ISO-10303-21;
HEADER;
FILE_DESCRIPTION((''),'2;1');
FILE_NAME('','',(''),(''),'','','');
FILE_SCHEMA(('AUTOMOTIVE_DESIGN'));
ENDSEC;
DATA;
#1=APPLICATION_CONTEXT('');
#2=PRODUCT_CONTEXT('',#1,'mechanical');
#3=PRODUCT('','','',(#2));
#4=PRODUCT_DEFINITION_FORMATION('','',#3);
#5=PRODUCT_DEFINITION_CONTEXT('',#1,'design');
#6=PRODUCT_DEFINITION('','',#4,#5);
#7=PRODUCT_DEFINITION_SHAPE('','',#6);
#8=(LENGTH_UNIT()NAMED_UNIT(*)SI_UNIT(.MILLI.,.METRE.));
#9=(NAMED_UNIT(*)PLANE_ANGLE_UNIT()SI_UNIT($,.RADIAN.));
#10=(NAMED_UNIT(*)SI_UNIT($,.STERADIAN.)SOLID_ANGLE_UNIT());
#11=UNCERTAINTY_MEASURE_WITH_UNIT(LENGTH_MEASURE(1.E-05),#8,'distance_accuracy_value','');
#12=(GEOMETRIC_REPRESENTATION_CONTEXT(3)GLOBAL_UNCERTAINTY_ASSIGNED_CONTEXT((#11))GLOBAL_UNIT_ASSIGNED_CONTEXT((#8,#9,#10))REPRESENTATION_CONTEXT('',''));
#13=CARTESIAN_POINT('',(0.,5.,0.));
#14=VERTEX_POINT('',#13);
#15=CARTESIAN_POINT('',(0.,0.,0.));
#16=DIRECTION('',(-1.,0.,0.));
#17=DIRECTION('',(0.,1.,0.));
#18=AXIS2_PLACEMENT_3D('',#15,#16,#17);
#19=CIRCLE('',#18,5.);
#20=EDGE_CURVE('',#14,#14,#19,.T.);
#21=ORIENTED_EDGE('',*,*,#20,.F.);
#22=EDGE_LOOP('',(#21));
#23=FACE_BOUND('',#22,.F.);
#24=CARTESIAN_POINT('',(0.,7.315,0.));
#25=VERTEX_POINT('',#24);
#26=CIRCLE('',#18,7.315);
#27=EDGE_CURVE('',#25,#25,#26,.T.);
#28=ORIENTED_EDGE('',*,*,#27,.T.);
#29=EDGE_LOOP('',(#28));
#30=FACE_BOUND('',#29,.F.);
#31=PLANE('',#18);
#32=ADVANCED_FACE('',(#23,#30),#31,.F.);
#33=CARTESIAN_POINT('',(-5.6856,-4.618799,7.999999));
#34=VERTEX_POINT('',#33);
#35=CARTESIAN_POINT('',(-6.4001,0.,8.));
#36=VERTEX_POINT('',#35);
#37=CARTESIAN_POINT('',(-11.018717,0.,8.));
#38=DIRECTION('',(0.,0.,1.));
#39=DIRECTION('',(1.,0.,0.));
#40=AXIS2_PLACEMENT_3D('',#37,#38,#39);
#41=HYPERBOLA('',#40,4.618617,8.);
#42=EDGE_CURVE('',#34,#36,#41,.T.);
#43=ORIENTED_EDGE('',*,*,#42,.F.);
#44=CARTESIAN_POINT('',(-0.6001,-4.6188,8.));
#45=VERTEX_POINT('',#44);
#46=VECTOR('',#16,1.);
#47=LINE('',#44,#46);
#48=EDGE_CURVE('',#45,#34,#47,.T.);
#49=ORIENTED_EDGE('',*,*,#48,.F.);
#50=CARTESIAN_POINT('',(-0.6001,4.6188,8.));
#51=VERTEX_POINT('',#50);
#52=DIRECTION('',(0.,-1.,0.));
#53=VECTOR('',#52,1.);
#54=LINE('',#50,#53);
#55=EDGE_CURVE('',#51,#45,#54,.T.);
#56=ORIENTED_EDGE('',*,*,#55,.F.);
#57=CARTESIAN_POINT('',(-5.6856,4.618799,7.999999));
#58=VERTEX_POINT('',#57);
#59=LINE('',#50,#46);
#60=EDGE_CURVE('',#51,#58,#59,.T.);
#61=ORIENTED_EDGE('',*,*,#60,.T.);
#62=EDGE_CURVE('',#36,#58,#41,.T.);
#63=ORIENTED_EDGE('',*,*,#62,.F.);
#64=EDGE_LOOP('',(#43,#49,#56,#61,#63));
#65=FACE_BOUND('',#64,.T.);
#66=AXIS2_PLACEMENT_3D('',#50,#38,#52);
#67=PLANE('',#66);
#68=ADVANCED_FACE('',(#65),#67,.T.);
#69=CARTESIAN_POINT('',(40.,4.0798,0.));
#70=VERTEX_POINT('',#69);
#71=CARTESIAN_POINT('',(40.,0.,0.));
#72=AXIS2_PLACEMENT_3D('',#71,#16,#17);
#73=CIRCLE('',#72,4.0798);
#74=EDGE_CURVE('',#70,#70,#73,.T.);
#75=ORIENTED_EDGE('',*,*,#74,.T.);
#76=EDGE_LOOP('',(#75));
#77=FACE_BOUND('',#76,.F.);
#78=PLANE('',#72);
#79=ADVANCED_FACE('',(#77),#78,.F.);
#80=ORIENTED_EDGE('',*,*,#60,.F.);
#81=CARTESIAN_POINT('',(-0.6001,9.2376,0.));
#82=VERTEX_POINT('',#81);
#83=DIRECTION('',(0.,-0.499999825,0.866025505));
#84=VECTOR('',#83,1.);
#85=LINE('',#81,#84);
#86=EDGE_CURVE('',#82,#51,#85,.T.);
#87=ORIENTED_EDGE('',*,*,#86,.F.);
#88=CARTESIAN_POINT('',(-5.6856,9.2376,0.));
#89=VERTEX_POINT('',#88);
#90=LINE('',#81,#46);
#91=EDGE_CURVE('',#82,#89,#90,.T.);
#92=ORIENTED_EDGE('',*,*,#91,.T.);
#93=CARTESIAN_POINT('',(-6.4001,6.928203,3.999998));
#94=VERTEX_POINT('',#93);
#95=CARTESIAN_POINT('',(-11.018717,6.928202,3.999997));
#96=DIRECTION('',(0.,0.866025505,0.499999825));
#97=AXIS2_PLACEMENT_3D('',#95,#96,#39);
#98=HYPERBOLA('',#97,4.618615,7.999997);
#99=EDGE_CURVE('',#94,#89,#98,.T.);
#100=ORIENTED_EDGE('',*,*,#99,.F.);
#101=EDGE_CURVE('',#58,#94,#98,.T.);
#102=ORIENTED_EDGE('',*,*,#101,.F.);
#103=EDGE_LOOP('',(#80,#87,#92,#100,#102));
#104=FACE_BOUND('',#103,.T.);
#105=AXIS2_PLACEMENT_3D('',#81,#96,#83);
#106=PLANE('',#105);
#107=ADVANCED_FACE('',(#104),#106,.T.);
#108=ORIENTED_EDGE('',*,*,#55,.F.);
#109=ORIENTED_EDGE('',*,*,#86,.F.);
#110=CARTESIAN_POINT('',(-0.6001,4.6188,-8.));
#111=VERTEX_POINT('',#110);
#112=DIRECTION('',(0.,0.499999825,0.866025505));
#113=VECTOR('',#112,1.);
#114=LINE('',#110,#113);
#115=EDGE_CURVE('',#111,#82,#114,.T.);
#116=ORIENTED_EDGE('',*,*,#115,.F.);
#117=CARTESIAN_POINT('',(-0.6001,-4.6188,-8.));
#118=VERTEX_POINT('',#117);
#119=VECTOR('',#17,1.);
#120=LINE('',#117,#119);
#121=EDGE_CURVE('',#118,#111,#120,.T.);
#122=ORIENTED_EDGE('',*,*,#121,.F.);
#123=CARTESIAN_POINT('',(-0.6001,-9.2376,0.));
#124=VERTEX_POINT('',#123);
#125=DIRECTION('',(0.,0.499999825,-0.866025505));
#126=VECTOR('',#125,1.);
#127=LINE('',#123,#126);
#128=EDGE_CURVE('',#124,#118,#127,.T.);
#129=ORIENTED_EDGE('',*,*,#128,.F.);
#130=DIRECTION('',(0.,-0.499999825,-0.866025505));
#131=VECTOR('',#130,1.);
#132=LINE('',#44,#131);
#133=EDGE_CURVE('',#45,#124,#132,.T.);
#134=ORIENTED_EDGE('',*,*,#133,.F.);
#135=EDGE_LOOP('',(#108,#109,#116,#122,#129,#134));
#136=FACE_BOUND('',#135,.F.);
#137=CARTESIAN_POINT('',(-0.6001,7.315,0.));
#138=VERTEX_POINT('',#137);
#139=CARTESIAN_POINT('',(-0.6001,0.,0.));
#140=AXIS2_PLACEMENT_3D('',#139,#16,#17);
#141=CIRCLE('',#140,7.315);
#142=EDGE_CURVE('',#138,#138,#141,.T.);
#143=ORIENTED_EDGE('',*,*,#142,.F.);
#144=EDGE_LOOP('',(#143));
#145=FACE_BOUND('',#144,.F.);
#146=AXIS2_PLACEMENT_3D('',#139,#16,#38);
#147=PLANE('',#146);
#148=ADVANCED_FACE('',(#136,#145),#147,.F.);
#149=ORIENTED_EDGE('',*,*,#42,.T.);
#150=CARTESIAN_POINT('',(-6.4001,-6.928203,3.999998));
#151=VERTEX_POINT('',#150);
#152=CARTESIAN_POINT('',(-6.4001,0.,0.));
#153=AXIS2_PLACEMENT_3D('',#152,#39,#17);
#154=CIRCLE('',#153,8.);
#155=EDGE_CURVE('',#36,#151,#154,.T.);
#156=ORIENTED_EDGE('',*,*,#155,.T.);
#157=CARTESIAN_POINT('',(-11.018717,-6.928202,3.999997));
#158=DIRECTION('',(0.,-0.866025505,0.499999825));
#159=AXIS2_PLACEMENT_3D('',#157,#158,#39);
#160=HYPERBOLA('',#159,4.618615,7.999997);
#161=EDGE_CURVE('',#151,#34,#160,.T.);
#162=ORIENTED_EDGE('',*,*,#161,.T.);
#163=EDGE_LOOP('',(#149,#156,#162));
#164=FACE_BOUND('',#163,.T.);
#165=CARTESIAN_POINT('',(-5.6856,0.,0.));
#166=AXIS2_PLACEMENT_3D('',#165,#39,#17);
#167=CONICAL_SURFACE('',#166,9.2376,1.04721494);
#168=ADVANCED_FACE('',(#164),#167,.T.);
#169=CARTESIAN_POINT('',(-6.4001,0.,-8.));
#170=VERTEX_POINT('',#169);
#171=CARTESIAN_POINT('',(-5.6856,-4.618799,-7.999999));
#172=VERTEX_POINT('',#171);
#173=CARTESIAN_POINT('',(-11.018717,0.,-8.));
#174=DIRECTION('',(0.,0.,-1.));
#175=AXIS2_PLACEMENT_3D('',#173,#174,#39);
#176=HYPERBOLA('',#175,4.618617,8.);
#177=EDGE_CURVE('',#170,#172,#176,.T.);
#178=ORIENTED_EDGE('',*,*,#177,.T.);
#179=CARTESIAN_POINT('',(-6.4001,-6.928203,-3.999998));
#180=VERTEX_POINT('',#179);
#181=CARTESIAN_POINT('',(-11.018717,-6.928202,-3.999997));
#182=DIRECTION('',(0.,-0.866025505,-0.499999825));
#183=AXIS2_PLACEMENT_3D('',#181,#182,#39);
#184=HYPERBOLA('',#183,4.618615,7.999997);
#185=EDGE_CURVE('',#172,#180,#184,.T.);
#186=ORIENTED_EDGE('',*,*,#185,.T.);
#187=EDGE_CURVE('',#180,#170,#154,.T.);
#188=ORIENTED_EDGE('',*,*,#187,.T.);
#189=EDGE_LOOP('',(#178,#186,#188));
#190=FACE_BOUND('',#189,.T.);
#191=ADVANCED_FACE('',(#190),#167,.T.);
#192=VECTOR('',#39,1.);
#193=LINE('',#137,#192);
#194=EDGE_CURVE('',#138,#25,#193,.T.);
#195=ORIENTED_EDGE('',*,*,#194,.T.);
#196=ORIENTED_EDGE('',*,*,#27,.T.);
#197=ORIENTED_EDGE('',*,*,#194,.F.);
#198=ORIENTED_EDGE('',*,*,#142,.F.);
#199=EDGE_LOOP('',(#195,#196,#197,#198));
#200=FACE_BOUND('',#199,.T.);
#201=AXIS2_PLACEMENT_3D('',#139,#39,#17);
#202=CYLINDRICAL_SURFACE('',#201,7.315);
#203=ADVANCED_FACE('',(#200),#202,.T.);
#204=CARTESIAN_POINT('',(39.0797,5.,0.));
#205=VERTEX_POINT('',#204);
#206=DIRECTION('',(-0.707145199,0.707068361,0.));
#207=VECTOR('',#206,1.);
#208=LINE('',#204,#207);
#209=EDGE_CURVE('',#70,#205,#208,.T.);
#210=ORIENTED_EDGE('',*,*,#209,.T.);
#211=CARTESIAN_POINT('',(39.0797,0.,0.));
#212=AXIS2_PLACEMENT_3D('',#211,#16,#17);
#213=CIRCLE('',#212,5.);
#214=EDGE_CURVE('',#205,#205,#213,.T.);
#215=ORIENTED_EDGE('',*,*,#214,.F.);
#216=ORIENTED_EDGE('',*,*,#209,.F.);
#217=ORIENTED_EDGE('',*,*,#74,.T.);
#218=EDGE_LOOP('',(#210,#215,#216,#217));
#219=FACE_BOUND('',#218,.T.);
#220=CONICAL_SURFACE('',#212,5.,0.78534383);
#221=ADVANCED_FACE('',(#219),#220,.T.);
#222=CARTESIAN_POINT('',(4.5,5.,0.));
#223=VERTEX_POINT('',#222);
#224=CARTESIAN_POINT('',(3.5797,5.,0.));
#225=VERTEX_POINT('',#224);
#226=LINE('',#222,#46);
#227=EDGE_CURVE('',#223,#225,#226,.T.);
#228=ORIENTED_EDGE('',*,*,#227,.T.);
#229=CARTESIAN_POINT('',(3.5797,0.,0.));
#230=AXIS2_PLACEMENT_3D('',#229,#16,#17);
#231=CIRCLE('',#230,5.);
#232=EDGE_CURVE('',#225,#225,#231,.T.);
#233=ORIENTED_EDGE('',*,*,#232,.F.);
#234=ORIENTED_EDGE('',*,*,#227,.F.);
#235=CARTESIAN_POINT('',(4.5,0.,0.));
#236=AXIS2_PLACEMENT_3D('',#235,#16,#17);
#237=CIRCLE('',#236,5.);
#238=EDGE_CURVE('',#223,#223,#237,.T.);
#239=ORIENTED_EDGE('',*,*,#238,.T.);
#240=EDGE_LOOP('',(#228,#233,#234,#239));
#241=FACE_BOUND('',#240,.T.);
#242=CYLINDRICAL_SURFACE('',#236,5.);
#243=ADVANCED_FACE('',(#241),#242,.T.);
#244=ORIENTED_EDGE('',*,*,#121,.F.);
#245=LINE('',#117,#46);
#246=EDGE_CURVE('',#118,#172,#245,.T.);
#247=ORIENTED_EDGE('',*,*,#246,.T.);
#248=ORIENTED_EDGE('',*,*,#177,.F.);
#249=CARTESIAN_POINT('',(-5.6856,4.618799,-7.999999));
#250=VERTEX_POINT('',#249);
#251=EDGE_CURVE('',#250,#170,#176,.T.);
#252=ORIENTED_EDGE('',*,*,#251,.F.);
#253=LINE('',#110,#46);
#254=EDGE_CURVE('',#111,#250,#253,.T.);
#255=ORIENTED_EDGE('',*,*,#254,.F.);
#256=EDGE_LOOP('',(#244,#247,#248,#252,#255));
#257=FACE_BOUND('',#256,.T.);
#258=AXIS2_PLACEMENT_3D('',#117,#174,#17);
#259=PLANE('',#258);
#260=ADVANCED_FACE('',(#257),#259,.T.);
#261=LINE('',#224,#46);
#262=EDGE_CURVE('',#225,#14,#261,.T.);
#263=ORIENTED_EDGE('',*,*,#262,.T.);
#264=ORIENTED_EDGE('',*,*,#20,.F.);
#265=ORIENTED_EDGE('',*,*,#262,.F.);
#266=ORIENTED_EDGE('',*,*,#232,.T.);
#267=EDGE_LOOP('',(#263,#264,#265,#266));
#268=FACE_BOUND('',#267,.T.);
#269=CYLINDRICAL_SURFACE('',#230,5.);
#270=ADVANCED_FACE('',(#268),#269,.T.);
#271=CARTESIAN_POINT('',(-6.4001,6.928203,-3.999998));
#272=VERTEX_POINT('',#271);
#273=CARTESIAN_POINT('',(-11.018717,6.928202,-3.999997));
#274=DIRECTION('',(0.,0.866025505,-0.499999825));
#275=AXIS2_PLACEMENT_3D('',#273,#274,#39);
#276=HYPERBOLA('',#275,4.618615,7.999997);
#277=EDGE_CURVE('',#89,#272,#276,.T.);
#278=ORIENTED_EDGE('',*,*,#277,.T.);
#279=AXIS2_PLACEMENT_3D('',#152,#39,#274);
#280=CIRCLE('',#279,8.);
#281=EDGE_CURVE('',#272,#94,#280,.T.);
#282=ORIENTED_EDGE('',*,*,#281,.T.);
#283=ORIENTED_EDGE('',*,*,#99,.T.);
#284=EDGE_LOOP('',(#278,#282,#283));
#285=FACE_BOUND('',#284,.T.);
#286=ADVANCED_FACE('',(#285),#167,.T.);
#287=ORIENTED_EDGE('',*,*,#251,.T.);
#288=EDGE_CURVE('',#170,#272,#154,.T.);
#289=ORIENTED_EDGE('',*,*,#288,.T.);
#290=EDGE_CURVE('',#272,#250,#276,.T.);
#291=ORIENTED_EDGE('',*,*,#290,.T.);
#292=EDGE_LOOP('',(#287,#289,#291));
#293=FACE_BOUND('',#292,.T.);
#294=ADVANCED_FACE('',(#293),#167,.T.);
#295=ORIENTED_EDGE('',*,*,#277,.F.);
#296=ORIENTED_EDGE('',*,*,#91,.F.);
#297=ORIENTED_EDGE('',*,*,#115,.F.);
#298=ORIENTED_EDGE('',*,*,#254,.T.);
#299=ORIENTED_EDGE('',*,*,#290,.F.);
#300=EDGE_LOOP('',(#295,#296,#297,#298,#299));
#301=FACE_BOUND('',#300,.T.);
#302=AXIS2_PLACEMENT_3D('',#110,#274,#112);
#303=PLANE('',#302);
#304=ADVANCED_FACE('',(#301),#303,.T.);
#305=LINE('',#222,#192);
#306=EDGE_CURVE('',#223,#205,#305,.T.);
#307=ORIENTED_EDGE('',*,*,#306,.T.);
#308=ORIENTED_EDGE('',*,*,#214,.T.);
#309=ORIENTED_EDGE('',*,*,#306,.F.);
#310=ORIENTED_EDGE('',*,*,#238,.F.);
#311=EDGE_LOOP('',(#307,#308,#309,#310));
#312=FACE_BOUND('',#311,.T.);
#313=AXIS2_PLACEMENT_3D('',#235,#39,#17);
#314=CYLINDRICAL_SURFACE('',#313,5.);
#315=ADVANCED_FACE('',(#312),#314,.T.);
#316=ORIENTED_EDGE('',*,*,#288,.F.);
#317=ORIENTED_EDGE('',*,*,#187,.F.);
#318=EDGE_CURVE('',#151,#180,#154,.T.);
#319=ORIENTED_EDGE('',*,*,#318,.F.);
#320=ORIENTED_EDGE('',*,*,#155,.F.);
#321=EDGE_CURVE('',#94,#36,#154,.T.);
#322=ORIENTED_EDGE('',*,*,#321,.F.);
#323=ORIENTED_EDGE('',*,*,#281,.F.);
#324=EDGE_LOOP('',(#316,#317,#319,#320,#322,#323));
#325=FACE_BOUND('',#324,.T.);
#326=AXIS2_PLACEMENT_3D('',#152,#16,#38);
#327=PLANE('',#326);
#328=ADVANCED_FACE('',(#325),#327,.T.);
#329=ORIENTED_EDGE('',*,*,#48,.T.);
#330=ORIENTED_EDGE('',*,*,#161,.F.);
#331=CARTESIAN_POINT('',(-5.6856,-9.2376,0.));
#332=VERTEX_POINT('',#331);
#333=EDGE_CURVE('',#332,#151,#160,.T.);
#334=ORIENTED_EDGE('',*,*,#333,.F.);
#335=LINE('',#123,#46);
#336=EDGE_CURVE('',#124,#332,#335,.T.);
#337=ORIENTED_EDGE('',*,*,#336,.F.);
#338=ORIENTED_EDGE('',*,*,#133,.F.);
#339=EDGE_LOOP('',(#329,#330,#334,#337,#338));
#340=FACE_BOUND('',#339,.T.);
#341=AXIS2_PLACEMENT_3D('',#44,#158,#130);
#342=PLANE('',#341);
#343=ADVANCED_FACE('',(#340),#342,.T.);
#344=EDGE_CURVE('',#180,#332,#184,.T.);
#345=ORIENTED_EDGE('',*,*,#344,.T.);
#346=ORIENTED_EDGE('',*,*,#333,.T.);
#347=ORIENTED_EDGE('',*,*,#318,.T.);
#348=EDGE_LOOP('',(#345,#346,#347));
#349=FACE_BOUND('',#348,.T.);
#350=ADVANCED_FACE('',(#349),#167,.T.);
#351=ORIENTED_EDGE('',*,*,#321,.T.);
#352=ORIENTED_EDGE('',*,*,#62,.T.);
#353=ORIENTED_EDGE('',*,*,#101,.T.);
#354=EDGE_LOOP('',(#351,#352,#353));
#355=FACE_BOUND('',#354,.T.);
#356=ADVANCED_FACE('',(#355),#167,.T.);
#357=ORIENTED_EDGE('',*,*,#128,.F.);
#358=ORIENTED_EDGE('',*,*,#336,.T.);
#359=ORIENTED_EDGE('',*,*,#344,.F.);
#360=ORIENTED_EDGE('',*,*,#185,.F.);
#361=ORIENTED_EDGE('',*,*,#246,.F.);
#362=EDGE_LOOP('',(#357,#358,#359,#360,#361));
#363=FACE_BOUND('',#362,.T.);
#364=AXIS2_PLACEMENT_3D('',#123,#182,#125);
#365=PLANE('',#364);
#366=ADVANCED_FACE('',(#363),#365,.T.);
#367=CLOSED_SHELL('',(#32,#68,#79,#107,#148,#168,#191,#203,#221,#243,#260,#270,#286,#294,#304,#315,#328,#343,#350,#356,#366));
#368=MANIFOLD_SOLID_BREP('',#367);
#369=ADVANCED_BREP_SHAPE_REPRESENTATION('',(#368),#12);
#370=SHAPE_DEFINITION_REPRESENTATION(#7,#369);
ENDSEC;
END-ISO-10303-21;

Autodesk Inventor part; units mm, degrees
ref_plane "YZ Plane" through (0, 0, 0) normal (1, 0, 0) x (0, 1, 0)
ref_plane "XZ Plane" through (0, 0, 0) normal (0, 1, 0) x (-1, 0, 0)
sketch "Sketch1" plane through (0, 0, 0) normal (0, 0, 1) x (1, 0, 0)
  line L0 (0, 7.315) -> (0, 5)
  line L1 (4.5, 5) -> (40, 5)
  line L2 (40, 5) -> (40, 0)
  line L3 (40, 0) -> (-0.6001, 0)
  line L4 (-8.7201, 0) -> (48.12, 0) projected
  line L5 (-0.6001, 0) -> (-0.6001, 7.315)
  line L6 (-0.6001, 7.315) -> (0, 7.315)
  line L7 (4.5, 5) -> (3.5797, 5)
  line L8 (3.5797, 5) -> (0, 5)
  line L9 (0, -1.463) -> (0, 8.778) projected
  dimension "d0" = 40
  dimension "d1" = 35.5
  dimension "d2" = 10
  dimension "d9" = 0.6001
  dimension "d10" = 14.63
  dimension "d13" = 0.9203
  dimension "d14" = 10
revolve "Body" add sketch "Sketch1" angle 360 about axis through (40, 0, 0) along (-1, 0, 0)
sketch "Sketch2" plane through (-0.6001, 0, 0) normal (-1, 0, 0) x (0, 0, 1)
  line L0 (0, 9.2376) -> (8, 4.6188)
  line L1 (8, 4.6188) -> (8, -4.6188)
  line L2 (8, -4.6188) -> (0, -9.2376)
  line L3 (0, -9.2376) -> (-8, -4.6188)
  line L4 (-8, -4.6188) -> (-8, 4.6188)
  line L5 (-8, 4.6188) -> (0, 9.2376)
  point P0 (0, 0)
  point P1 (0, 0)
  dimension "d11" = 16
extrude "Head" add sketch "Sketch2" along normal blind 5.8
sketch "Sketch4" plane through (0, 0, 0) normal (0, 0, 1) x (1, 0, 0)
  line L0 (-6.4001, 8) -> (-6.4001, 9.2376)
  line L1 (-6.4001, 9.2376) -> (-5.6856, 9.2376)
  line L2 (-5.6856, 9.2376) -> (-6.4001, 8)
  line L3 (-7.5601, 0) -> (0.5599, 0) projected
  line L4 (-0.6001, 9.2376) -> (-6.4001, 9.2376) projected
  line L5 (-6.4001, 4.6188) -> (-6.4001, 9.2376) projected
  dimension "d5" = 30
  dimension "d19" = 16
revolve "Chamfer1" cut sketch "Sketch4" angle 360 about axis through (-10, 0, 0) along (1, 0, 0)
thread "Thread" size "M10x1.5" class "6g" standard "ISO Metric profile" length 35.5
chamfer "Chamfer2" distance 0.9202 distance2 0.9203 1 edges at (40, -5, 0) measured on face at (40, 1.2281, 0.495)
ref_plane "Work Plane1" through (1.525, 0, 0) normal (0, 0, 1) x (1, 0, 0)
equation "\"d11\" = SW"
equation "\"d3\" = KOH - SD"
equation "\"d15\" = GEL"
equation "\"d6\" = -0.5 * SPD + 0.5 * GD"
equation "\"d0\" = NLG"
equation "\"d1\" = GEL"
equation "\"d2\" = GD"
equation "\"d10\" = SD2"
equation "\"d14\" = BDM"
equation "\"d5\" = ANG1"
equation "\"d19\" = SW0"
equation "\"NLG\" = 40"
equation "\"GD\" = NND"
equation "\"BDM\" = NND"
equation "\"KOH\" = 6.4"
equation "\"GEL\" = 35.5"
equation "\"SW\" = 16"
equation "\"SW0\" = SW"
equation "\"SPD\" = NND - 1.2269 * PTC"
equation "\"SD2\" = 14.63"
equation "\"SD\" = 0.6"
equation "\"ANG1\" = 30deg"
equation "\"GAL\" = 0.61345 * PTC"
equation "\"GUL\" = 0.61345 * PTC"
equation "\"RR\" = 0.4"
equation "\"GD1\" = THREADDIA - 1.2269 * PTC"
equation "\"SDH\" = SD2"
equation "\"SDHG\" = 4.5"
equation "\"TOA\" = 30deg"
equation "\"PTC\" = 1.5"
equation "\"E0\" = 18.48"
equation "\"NND\" = 10"
equation "\"THREADDIA\" = 10"
properties part number "ISO 4017 - M10 x 40" material "Stainless Steel, 440C"
